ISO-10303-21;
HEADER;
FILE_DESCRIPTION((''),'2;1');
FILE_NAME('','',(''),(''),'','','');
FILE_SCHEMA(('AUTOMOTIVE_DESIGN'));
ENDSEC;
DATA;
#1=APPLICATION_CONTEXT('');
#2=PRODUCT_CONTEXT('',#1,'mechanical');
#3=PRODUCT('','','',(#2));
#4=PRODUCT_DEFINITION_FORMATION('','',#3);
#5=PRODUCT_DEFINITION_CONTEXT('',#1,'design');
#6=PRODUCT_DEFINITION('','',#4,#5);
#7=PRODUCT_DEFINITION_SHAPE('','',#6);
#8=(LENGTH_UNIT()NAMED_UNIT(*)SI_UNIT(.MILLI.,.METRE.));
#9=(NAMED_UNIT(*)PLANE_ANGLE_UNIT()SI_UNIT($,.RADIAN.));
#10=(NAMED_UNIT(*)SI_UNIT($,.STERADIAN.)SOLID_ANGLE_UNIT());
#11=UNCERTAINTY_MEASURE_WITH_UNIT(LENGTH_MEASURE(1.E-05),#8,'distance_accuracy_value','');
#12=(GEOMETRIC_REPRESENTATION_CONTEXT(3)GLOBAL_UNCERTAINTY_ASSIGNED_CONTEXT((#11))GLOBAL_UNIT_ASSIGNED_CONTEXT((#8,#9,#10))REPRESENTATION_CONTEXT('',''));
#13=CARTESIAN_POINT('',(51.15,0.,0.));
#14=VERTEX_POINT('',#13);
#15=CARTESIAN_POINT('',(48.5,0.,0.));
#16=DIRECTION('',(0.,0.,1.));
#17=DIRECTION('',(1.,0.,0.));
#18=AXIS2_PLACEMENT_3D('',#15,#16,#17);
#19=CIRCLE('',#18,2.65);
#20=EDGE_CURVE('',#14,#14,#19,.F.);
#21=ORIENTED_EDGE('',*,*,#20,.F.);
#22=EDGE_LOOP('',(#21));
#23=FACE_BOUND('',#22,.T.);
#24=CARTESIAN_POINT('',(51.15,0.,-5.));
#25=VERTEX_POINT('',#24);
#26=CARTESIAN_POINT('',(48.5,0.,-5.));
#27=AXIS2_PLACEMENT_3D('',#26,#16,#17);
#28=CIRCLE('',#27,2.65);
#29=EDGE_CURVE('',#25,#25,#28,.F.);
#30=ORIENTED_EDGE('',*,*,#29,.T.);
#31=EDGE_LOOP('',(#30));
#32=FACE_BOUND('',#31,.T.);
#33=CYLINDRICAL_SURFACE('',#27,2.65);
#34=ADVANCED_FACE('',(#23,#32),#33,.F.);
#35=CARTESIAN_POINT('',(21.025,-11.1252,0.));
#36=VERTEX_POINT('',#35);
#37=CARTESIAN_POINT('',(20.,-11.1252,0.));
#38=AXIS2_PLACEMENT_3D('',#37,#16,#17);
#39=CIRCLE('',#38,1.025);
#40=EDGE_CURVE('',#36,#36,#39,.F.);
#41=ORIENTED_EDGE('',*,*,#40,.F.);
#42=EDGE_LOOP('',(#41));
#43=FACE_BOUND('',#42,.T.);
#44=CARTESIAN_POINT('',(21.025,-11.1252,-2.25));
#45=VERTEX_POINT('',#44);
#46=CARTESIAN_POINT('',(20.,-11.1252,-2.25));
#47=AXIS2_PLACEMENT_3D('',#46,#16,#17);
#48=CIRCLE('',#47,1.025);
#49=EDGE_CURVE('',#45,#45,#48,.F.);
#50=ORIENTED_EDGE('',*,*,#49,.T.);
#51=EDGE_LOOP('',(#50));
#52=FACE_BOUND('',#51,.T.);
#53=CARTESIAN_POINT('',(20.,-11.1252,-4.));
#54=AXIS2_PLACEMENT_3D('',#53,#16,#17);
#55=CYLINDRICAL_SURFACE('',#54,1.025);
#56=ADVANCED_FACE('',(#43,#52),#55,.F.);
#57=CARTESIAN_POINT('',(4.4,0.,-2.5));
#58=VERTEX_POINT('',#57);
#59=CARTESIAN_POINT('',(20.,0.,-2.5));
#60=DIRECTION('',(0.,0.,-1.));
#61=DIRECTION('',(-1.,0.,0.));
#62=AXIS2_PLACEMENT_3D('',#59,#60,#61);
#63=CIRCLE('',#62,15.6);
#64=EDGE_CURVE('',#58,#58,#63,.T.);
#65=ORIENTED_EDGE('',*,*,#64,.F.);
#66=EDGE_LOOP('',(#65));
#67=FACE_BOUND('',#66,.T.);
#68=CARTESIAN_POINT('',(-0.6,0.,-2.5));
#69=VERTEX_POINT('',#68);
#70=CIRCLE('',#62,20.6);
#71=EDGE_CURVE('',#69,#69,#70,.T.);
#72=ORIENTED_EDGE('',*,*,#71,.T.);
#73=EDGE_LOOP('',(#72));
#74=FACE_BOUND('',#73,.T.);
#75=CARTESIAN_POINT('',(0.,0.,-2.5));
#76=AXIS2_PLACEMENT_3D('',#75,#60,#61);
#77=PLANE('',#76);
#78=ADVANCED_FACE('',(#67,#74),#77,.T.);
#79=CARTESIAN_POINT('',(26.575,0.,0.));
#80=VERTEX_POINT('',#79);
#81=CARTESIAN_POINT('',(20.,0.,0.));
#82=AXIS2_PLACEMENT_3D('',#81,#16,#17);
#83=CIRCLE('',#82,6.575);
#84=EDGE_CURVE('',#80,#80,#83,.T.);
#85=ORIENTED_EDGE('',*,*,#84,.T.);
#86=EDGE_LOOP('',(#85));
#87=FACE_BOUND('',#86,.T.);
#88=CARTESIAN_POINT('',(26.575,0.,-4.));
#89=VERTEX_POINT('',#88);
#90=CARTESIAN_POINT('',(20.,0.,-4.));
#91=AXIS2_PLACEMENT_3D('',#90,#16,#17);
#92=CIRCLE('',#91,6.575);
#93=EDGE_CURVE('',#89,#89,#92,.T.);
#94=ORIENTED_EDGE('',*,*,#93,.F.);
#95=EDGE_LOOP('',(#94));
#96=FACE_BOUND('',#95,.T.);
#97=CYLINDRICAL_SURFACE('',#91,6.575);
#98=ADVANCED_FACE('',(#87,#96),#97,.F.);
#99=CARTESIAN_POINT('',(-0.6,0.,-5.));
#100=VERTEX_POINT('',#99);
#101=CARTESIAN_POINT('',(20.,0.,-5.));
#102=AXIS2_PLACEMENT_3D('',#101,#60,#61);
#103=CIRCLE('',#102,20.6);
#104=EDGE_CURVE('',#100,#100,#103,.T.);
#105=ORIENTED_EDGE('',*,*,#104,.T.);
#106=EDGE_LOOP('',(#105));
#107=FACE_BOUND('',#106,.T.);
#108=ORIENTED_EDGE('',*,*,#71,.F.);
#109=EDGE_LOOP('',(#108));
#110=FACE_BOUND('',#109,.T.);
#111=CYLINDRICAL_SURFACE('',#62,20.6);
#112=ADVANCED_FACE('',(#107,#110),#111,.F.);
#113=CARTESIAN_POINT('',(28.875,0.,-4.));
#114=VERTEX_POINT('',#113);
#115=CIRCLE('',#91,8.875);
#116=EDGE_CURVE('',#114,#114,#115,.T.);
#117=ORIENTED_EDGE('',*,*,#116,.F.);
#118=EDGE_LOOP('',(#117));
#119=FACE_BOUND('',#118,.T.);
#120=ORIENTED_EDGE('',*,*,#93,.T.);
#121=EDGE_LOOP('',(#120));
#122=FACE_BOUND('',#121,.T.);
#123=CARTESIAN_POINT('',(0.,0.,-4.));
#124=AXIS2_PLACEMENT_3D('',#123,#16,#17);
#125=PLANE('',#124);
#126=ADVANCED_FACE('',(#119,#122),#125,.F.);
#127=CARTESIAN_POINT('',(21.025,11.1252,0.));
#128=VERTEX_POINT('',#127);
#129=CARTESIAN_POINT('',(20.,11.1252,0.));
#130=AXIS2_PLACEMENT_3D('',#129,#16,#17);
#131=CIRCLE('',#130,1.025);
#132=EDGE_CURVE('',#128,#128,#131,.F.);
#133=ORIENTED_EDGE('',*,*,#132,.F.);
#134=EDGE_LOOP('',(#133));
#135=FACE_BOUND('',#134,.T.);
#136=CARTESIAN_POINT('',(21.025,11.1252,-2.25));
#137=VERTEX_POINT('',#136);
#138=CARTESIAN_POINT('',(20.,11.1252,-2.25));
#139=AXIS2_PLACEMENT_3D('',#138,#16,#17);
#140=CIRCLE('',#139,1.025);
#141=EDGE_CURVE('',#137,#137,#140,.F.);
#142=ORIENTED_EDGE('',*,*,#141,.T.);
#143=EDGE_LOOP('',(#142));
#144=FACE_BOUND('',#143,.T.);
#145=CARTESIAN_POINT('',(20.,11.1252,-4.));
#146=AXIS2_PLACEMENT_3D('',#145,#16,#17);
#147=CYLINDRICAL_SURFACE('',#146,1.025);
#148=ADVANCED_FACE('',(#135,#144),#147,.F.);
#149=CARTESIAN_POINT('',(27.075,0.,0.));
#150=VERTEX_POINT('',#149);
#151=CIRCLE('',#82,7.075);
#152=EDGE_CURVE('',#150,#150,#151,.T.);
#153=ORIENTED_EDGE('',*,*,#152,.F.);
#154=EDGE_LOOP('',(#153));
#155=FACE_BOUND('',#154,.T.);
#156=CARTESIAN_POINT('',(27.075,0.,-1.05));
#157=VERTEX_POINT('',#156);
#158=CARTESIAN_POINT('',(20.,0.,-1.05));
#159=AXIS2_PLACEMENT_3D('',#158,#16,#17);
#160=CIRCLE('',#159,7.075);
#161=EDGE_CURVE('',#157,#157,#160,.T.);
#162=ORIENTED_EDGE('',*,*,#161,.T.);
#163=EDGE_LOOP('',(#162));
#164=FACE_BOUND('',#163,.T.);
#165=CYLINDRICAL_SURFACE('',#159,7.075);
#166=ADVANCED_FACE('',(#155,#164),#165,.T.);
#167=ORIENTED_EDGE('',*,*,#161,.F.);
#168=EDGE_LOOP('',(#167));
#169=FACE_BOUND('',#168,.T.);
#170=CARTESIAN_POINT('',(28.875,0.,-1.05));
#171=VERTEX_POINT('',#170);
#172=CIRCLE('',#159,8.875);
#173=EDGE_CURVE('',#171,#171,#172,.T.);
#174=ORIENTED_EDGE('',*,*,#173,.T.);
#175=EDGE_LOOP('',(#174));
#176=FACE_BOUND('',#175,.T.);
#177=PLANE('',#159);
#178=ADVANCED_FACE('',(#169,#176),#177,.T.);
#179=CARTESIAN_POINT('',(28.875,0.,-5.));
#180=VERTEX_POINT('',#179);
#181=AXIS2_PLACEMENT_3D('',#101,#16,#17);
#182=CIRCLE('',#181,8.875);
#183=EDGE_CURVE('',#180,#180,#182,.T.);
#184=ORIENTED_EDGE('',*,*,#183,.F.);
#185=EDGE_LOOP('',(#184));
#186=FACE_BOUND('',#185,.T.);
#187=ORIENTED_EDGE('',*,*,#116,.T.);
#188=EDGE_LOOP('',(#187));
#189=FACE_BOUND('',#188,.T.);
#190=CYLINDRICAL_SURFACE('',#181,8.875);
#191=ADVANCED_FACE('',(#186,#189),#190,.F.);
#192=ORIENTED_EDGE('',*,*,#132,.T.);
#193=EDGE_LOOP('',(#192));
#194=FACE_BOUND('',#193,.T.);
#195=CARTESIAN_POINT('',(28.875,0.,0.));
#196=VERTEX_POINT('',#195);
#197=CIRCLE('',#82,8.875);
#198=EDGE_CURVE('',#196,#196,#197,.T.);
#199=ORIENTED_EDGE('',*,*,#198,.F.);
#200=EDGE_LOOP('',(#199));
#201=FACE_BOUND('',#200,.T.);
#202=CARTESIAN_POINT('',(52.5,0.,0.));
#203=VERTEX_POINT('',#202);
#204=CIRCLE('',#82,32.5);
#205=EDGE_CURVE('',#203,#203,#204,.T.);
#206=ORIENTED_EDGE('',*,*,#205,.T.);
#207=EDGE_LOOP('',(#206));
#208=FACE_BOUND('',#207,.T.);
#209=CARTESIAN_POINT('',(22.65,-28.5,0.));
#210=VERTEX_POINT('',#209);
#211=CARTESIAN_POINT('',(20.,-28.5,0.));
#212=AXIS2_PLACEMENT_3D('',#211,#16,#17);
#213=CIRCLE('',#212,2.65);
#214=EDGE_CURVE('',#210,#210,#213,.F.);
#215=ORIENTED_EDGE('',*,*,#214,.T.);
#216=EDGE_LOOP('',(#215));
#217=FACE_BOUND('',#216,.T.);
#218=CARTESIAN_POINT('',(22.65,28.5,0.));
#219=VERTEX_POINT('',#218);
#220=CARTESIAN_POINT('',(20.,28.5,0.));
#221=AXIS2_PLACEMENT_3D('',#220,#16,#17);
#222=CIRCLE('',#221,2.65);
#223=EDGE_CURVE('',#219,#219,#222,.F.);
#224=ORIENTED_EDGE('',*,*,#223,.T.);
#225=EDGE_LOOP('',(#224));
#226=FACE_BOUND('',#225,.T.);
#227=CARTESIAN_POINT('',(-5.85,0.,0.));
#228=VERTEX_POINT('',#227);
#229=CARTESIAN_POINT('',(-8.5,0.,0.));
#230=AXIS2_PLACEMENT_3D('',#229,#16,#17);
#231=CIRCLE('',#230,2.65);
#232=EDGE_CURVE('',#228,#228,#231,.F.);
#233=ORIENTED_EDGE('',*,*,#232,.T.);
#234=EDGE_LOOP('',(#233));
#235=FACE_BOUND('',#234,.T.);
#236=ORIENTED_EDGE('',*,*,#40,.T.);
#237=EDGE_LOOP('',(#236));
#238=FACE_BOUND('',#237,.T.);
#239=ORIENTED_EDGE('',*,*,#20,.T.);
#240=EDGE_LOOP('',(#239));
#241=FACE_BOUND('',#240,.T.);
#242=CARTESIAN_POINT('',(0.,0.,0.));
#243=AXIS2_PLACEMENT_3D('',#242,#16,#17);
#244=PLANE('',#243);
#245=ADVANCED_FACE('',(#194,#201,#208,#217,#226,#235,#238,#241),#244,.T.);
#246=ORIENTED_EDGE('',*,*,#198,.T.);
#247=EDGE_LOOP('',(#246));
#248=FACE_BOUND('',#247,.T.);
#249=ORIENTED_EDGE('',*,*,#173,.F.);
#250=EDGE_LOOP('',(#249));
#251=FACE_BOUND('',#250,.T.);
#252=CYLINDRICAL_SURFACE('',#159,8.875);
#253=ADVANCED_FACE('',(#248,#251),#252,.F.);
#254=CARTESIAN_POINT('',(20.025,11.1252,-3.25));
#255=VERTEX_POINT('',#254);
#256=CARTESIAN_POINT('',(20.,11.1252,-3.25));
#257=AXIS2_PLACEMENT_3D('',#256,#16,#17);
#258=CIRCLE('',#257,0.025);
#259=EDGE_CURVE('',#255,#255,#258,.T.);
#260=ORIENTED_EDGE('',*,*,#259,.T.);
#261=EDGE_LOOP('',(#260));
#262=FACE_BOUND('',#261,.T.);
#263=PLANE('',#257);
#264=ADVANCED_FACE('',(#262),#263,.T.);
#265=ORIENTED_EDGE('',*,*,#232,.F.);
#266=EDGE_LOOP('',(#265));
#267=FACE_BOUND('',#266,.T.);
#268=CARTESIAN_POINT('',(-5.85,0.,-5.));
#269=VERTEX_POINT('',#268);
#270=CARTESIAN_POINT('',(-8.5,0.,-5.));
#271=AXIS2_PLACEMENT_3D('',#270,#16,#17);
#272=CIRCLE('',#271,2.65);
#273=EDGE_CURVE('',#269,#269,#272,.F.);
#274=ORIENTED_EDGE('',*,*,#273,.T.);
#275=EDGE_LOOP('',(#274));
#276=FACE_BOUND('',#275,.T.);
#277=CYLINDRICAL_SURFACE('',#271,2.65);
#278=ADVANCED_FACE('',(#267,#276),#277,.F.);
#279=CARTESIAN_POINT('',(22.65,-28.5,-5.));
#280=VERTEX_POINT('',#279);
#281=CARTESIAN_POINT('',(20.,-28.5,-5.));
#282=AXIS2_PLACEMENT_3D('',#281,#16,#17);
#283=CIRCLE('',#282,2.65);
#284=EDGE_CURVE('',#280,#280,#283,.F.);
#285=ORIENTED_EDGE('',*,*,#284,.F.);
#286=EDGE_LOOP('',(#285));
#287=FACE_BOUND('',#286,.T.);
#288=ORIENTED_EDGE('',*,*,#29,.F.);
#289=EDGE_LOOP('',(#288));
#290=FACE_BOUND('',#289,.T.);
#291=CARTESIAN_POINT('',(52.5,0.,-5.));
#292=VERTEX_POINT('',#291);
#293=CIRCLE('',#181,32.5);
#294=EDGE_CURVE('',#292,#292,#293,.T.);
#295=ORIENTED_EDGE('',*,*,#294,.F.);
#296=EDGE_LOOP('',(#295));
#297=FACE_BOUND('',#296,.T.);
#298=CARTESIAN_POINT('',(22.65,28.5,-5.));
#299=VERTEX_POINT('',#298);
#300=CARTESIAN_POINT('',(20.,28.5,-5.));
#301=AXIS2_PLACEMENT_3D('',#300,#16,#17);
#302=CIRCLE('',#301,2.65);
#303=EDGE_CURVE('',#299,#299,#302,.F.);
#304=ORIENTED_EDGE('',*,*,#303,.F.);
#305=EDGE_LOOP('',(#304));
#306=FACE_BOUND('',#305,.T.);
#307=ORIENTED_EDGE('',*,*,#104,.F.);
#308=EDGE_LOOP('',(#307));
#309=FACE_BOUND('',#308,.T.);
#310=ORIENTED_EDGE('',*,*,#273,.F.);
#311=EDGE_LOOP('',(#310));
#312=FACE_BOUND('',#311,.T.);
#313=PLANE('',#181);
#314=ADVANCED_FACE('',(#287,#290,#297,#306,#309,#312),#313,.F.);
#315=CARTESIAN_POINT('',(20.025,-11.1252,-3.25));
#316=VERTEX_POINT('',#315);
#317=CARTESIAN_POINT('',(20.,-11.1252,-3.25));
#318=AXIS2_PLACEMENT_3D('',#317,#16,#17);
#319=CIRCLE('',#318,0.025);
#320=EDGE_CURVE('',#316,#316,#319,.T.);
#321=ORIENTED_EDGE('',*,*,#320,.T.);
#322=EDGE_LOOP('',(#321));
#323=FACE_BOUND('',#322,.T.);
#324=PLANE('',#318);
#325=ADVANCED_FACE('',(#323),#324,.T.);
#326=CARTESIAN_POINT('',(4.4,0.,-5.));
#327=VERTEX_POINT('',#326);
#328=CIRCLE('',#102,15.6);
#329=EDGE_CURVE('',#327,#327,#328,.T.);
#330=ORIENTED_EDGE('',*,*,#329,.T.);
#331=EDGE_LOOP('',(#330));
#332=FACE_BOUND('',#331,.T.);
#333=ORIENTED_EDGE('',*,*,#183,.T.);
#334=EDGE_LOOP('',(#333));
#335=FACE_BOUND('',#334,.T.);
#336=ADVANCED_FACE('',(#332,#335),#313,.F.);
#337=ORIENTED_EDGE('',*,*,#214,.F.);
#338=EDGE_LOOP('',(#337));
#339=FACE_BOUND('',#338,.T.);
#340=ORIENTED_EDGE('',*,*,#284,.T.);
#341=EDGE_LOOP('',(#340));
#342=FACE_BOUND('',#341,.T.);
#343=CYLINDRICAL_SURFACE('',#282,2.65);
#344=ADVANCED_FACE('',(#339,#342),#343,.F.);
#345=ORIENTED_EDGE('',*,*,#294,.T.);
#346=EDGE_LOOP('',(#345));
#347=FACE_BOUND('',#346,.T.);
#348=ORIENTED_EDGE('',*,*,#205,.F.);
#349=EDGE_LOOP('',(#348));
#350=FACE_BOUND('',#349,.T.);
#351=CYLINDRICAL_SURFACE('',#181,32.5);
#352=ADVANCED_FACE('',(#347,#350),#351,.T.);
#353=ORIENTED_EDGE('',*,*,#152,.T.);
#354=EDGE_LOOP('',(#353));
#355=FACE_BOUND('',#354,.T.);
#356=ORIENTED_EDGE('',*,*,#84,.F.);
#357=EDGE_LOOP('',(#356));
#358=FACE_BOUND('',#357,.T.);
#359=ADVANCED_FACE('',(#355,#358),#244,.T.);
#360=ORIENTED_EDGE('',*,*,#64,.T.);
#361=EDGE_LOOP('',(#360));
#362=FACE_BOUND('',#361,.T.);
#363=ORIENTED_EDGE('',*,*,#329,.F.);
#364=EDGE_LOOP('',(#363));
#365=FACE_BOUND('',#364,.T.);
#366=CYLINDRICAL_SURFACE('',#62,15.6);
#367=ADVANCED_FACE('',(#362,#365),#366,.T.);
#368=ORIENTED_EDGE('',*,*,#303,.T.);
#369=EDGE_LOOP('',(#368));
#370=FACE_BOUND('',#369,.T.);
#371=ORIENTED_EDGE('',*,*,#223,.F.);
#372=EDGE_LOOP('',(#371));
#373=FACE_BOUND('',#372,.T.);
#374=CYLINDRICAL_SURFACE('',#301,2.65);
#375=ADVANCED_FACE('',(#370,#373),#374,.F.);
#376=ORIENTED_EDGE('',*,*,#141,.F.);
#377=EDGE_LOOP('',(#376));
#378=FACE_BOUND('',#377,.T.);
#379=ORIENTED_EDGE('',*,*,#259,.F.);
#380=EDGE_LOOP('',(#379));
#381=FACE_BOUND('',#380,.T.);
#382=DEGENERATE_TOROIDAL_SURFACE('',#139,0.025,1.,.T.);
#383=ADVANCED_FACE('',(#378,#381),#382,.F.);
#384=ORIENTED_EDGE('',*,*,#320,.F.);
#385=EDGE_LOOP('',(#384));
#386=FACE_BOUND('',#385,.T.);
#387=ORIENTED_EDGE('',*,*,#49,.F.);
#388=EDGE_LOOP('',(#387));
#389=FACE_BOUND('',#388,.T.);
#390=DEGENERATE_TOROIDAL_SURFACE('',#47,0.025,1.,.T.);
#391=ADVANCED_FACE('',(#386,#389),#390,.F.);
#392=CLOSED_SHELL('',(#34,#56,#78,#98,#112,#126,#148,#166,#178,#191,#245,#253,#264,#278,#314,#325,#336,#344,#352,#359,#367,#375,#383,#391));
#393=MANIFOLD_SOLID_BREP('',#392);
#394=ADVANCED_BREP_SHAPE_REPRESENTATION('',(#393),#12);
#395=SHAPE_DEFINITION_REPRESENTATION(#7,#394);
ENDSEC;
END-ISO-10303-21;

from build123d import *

# Parameters (mm, degrees)
BOSS_EXTRUDE1_START       = -4
BOSS_EXTRUDE1_OUTLINE_R   = 2.2
BOSS_EXTRUDE1_OUTLINE_R_2 = 1.025
BOSS_EXTRUDE1_OUTLINE_R_3 = 6.575
BOSS_EXTRUDE1_DEPTH       = 4
SKETCH3_R                 = 8.875
SKETCH3_R_2               = 7.075
CUT_EXTRUDE1_DEPTH        = 1.05
BOSS_EXTRUDE2_START       = -4
SKETCH4_R                 = 1.025
BOSS_EXTRUDE2_DEPTH       = 0.75
FILLET1_R                 = 1
BOSS_EXTRUDE3_START       = -5
SKETCH5_R                 = 32.5
SKETCH5_R_2               = 1.025
SKETCH5_R_3               = 8.875
BOSS_EXTRUDE3_DEPTH       = 5
SKETCH6_R                 = 2.65
CUT_EXTRUDE2_DEPTH        = 5
SKETCH7_R                 = 20.6
SKETCH7_R_2               = 15.6
CUT_EXTRUDE3_DEPTH        = 2.5
BOSS_EXTRUDE4_START       = 1
SKETCH8_R                 = 1.025
BOSS_EXTRUDE4_DEPTH       = 1


# Read off the part's stored shape, not the designer's step: Boss-Extrude1
with BuildPart() as part:
    # Boss-Extrude1 outline → Boss-Extrude1 (new body)
    with BuildSketch(Plane.XY.offset(BOSS_EXTRUDE1_START)):
        with BuildLine():
            Line((-5.8, 12.8), (-5.8, -12.8))
            ThreePointArc((-5.8, -12.8), (-1.992388155, -21.992388155), (7.2, -25.8))
            Line((7.2, -25.8), (32.8, -25.8))
            ThreePointArc((32.8, -25.8), (41.992388155, -21.992388155), (45.8, -12.8))
            Line((45.8, -12.8), (45.8, 12.8))
            ThreePointArc((45.8, 12.8), (41.992388155, 21.992388155), (32.8, 25.8))
            Line((32.8, 25.8), (7.2, 25.8))
            ThreePointArc((7.2, 25.8), (-1.992388155, 21.992388155), (-5.8, 12.8))
        make_face()
        with Locations((25, -22)):
            Circle(BOSS_EXTRUDE1_OUTLINE_R, mode=Mode.SUBTRACT)
        with Locations((20, -11.1252)):
            Circle(BOSS_EXTRUDE1_OUTLINE_R_2, mode=Mode.SUBTRACT)
        with Locations((-2, 0)):
            Circle(BOSS_EXTRUDE1_OUTLINE_R, mode=Mode.SUBTRACT)
        with Locations((20, 0)):
            Circle(BOSS_EXTRUDE1_OUTLINE_R_3, mode=Mode.SUBTRACT)
        with Locations((20, 11.1252)):
            Circle(BOSS_EXTRUDE1_OUTLINE_R_2, mode=Mode.SUBTRACT)
        with Locations((42, 0)):
            Circle(BOSS_EXTRUDE1_OUTLINE_R, mode=Mode.SUBTRACT)
        with Locations((25, 22)):
            Circle(BOSS_EXTRUDE1_OUTLINE_R, mode=Mode.SUBTRACT)
    extrude(amount=BOSS_EXTRUDE1_DEPTH)

    # Sketch3 → Cut-Extrude1 (cut)
    with BuildSketch(Plane.XY):
        with Locations((20, 0)):
            Circle(SKETCH3_R)
        with Locations((20, 0)):
            Circle(SKETCH3_R_2, mode=Mode.SUBTRACT)
    extrude(amount=-CUT_EXTRUDE1_DEPTH, mode=Mode.SUBTRACT)

    # Sketch4 → Boss-Extrude2 (add)
    with BuildSketch(Plane.XY.offset(BOSS_EXTRUDE2_START)):
        with Locations((20, 11.1252)):
            Circle(SKETCH4_R)
        with Locations((20, -11.1252)):
            Circle(SKETCH4_R)
    extrude(amount=BOSS_EXTRUDE2_DEPTH)

    # Fillet1
    fillet1_edges = [part.edges().sort_by_distance(p)[0] for p in [
        (18.975, 11.1252, -3.25),
        (18.975, -11.1252, -3.25),
    ]]
    fillet(fillet1_edges, radius=FILLET1_R)

    # Sketch5 → Boss-Extrude3 (add)
    with BuildSketch(Plane.XY.offset(BOSS_EXTRUDE3_START)):
        with Locations((20, 0)):
            Circle(SKETCH5_R)
        with Locations((20, -11.1252)):
            Circle(SKETCH5_R_2, mode=Mode.SUBTRACT)
        with Locations((20, 11.1252)):
            Circle(SKETCH5_R_2, mode=Mode.SUBTRACT)
        with Locations((20, 0)):
            Circle(SKETCH5_R_3, mode=Mode.SUBTRACT)
    extrude(amount=BOSS_EXTRUDE3_DEPTH)

    # Sketch6 → Cut-Extrude2 (cut)
    with BuildSketch(Plane.XY):
        with Locations((-8.5, 0)):
            Circle(SKETCH6_R)
        with Locations((20, 28.5)):
            Circle(SKETCH6_R)
        with Locations((48.5, 0)):
            Circle(SKETCH6_R)
        with Locations((20, -28.5)):
            Circle(SKETCH6_R)
    extrude(amount=-CUT_EXTRUDE2_DEPTH, mode=Mode.SUBTRACT)

    # Sketch7 → Cut-Extrude3 (cut)
    with BuildSketch(Plane(origin=(0, 0, -5), x_dir=(-1, 0, 0), z_dir=(0, 0, -1))):
        with Locations((-20, 0)):
            Circle(SKETCH7_R)
        with Locations((-20, 0)):
            Circle(SKETCH7_R_2, mode=Mode.SUBTRACT)
    extrude(amount=-CUT_EXTRUDE3_DEPTH, mode=Mode.SUBTRACT)

    # Sketch8 → Boss-Extrude4 (add)
    with BuildSketch(Plane(origin=(0, 0, -4), x_dir=(-1, 0, 0), z_dir=(0, 0, -1)).offset(BOSS_EXTRUDE4_START)):
        with Locations(Location((-20, -11.1252, 0), (0, 0, 180))):
            Circle(SKETCH8_R)
        with Locations(Location((-20, 11.1252, 0), (0, 0, 180))):
            Circle(SKETCH8_R)
    extrude(amount=-BOSS_EXTRUDE4_DEPTH)


solid = part.part
